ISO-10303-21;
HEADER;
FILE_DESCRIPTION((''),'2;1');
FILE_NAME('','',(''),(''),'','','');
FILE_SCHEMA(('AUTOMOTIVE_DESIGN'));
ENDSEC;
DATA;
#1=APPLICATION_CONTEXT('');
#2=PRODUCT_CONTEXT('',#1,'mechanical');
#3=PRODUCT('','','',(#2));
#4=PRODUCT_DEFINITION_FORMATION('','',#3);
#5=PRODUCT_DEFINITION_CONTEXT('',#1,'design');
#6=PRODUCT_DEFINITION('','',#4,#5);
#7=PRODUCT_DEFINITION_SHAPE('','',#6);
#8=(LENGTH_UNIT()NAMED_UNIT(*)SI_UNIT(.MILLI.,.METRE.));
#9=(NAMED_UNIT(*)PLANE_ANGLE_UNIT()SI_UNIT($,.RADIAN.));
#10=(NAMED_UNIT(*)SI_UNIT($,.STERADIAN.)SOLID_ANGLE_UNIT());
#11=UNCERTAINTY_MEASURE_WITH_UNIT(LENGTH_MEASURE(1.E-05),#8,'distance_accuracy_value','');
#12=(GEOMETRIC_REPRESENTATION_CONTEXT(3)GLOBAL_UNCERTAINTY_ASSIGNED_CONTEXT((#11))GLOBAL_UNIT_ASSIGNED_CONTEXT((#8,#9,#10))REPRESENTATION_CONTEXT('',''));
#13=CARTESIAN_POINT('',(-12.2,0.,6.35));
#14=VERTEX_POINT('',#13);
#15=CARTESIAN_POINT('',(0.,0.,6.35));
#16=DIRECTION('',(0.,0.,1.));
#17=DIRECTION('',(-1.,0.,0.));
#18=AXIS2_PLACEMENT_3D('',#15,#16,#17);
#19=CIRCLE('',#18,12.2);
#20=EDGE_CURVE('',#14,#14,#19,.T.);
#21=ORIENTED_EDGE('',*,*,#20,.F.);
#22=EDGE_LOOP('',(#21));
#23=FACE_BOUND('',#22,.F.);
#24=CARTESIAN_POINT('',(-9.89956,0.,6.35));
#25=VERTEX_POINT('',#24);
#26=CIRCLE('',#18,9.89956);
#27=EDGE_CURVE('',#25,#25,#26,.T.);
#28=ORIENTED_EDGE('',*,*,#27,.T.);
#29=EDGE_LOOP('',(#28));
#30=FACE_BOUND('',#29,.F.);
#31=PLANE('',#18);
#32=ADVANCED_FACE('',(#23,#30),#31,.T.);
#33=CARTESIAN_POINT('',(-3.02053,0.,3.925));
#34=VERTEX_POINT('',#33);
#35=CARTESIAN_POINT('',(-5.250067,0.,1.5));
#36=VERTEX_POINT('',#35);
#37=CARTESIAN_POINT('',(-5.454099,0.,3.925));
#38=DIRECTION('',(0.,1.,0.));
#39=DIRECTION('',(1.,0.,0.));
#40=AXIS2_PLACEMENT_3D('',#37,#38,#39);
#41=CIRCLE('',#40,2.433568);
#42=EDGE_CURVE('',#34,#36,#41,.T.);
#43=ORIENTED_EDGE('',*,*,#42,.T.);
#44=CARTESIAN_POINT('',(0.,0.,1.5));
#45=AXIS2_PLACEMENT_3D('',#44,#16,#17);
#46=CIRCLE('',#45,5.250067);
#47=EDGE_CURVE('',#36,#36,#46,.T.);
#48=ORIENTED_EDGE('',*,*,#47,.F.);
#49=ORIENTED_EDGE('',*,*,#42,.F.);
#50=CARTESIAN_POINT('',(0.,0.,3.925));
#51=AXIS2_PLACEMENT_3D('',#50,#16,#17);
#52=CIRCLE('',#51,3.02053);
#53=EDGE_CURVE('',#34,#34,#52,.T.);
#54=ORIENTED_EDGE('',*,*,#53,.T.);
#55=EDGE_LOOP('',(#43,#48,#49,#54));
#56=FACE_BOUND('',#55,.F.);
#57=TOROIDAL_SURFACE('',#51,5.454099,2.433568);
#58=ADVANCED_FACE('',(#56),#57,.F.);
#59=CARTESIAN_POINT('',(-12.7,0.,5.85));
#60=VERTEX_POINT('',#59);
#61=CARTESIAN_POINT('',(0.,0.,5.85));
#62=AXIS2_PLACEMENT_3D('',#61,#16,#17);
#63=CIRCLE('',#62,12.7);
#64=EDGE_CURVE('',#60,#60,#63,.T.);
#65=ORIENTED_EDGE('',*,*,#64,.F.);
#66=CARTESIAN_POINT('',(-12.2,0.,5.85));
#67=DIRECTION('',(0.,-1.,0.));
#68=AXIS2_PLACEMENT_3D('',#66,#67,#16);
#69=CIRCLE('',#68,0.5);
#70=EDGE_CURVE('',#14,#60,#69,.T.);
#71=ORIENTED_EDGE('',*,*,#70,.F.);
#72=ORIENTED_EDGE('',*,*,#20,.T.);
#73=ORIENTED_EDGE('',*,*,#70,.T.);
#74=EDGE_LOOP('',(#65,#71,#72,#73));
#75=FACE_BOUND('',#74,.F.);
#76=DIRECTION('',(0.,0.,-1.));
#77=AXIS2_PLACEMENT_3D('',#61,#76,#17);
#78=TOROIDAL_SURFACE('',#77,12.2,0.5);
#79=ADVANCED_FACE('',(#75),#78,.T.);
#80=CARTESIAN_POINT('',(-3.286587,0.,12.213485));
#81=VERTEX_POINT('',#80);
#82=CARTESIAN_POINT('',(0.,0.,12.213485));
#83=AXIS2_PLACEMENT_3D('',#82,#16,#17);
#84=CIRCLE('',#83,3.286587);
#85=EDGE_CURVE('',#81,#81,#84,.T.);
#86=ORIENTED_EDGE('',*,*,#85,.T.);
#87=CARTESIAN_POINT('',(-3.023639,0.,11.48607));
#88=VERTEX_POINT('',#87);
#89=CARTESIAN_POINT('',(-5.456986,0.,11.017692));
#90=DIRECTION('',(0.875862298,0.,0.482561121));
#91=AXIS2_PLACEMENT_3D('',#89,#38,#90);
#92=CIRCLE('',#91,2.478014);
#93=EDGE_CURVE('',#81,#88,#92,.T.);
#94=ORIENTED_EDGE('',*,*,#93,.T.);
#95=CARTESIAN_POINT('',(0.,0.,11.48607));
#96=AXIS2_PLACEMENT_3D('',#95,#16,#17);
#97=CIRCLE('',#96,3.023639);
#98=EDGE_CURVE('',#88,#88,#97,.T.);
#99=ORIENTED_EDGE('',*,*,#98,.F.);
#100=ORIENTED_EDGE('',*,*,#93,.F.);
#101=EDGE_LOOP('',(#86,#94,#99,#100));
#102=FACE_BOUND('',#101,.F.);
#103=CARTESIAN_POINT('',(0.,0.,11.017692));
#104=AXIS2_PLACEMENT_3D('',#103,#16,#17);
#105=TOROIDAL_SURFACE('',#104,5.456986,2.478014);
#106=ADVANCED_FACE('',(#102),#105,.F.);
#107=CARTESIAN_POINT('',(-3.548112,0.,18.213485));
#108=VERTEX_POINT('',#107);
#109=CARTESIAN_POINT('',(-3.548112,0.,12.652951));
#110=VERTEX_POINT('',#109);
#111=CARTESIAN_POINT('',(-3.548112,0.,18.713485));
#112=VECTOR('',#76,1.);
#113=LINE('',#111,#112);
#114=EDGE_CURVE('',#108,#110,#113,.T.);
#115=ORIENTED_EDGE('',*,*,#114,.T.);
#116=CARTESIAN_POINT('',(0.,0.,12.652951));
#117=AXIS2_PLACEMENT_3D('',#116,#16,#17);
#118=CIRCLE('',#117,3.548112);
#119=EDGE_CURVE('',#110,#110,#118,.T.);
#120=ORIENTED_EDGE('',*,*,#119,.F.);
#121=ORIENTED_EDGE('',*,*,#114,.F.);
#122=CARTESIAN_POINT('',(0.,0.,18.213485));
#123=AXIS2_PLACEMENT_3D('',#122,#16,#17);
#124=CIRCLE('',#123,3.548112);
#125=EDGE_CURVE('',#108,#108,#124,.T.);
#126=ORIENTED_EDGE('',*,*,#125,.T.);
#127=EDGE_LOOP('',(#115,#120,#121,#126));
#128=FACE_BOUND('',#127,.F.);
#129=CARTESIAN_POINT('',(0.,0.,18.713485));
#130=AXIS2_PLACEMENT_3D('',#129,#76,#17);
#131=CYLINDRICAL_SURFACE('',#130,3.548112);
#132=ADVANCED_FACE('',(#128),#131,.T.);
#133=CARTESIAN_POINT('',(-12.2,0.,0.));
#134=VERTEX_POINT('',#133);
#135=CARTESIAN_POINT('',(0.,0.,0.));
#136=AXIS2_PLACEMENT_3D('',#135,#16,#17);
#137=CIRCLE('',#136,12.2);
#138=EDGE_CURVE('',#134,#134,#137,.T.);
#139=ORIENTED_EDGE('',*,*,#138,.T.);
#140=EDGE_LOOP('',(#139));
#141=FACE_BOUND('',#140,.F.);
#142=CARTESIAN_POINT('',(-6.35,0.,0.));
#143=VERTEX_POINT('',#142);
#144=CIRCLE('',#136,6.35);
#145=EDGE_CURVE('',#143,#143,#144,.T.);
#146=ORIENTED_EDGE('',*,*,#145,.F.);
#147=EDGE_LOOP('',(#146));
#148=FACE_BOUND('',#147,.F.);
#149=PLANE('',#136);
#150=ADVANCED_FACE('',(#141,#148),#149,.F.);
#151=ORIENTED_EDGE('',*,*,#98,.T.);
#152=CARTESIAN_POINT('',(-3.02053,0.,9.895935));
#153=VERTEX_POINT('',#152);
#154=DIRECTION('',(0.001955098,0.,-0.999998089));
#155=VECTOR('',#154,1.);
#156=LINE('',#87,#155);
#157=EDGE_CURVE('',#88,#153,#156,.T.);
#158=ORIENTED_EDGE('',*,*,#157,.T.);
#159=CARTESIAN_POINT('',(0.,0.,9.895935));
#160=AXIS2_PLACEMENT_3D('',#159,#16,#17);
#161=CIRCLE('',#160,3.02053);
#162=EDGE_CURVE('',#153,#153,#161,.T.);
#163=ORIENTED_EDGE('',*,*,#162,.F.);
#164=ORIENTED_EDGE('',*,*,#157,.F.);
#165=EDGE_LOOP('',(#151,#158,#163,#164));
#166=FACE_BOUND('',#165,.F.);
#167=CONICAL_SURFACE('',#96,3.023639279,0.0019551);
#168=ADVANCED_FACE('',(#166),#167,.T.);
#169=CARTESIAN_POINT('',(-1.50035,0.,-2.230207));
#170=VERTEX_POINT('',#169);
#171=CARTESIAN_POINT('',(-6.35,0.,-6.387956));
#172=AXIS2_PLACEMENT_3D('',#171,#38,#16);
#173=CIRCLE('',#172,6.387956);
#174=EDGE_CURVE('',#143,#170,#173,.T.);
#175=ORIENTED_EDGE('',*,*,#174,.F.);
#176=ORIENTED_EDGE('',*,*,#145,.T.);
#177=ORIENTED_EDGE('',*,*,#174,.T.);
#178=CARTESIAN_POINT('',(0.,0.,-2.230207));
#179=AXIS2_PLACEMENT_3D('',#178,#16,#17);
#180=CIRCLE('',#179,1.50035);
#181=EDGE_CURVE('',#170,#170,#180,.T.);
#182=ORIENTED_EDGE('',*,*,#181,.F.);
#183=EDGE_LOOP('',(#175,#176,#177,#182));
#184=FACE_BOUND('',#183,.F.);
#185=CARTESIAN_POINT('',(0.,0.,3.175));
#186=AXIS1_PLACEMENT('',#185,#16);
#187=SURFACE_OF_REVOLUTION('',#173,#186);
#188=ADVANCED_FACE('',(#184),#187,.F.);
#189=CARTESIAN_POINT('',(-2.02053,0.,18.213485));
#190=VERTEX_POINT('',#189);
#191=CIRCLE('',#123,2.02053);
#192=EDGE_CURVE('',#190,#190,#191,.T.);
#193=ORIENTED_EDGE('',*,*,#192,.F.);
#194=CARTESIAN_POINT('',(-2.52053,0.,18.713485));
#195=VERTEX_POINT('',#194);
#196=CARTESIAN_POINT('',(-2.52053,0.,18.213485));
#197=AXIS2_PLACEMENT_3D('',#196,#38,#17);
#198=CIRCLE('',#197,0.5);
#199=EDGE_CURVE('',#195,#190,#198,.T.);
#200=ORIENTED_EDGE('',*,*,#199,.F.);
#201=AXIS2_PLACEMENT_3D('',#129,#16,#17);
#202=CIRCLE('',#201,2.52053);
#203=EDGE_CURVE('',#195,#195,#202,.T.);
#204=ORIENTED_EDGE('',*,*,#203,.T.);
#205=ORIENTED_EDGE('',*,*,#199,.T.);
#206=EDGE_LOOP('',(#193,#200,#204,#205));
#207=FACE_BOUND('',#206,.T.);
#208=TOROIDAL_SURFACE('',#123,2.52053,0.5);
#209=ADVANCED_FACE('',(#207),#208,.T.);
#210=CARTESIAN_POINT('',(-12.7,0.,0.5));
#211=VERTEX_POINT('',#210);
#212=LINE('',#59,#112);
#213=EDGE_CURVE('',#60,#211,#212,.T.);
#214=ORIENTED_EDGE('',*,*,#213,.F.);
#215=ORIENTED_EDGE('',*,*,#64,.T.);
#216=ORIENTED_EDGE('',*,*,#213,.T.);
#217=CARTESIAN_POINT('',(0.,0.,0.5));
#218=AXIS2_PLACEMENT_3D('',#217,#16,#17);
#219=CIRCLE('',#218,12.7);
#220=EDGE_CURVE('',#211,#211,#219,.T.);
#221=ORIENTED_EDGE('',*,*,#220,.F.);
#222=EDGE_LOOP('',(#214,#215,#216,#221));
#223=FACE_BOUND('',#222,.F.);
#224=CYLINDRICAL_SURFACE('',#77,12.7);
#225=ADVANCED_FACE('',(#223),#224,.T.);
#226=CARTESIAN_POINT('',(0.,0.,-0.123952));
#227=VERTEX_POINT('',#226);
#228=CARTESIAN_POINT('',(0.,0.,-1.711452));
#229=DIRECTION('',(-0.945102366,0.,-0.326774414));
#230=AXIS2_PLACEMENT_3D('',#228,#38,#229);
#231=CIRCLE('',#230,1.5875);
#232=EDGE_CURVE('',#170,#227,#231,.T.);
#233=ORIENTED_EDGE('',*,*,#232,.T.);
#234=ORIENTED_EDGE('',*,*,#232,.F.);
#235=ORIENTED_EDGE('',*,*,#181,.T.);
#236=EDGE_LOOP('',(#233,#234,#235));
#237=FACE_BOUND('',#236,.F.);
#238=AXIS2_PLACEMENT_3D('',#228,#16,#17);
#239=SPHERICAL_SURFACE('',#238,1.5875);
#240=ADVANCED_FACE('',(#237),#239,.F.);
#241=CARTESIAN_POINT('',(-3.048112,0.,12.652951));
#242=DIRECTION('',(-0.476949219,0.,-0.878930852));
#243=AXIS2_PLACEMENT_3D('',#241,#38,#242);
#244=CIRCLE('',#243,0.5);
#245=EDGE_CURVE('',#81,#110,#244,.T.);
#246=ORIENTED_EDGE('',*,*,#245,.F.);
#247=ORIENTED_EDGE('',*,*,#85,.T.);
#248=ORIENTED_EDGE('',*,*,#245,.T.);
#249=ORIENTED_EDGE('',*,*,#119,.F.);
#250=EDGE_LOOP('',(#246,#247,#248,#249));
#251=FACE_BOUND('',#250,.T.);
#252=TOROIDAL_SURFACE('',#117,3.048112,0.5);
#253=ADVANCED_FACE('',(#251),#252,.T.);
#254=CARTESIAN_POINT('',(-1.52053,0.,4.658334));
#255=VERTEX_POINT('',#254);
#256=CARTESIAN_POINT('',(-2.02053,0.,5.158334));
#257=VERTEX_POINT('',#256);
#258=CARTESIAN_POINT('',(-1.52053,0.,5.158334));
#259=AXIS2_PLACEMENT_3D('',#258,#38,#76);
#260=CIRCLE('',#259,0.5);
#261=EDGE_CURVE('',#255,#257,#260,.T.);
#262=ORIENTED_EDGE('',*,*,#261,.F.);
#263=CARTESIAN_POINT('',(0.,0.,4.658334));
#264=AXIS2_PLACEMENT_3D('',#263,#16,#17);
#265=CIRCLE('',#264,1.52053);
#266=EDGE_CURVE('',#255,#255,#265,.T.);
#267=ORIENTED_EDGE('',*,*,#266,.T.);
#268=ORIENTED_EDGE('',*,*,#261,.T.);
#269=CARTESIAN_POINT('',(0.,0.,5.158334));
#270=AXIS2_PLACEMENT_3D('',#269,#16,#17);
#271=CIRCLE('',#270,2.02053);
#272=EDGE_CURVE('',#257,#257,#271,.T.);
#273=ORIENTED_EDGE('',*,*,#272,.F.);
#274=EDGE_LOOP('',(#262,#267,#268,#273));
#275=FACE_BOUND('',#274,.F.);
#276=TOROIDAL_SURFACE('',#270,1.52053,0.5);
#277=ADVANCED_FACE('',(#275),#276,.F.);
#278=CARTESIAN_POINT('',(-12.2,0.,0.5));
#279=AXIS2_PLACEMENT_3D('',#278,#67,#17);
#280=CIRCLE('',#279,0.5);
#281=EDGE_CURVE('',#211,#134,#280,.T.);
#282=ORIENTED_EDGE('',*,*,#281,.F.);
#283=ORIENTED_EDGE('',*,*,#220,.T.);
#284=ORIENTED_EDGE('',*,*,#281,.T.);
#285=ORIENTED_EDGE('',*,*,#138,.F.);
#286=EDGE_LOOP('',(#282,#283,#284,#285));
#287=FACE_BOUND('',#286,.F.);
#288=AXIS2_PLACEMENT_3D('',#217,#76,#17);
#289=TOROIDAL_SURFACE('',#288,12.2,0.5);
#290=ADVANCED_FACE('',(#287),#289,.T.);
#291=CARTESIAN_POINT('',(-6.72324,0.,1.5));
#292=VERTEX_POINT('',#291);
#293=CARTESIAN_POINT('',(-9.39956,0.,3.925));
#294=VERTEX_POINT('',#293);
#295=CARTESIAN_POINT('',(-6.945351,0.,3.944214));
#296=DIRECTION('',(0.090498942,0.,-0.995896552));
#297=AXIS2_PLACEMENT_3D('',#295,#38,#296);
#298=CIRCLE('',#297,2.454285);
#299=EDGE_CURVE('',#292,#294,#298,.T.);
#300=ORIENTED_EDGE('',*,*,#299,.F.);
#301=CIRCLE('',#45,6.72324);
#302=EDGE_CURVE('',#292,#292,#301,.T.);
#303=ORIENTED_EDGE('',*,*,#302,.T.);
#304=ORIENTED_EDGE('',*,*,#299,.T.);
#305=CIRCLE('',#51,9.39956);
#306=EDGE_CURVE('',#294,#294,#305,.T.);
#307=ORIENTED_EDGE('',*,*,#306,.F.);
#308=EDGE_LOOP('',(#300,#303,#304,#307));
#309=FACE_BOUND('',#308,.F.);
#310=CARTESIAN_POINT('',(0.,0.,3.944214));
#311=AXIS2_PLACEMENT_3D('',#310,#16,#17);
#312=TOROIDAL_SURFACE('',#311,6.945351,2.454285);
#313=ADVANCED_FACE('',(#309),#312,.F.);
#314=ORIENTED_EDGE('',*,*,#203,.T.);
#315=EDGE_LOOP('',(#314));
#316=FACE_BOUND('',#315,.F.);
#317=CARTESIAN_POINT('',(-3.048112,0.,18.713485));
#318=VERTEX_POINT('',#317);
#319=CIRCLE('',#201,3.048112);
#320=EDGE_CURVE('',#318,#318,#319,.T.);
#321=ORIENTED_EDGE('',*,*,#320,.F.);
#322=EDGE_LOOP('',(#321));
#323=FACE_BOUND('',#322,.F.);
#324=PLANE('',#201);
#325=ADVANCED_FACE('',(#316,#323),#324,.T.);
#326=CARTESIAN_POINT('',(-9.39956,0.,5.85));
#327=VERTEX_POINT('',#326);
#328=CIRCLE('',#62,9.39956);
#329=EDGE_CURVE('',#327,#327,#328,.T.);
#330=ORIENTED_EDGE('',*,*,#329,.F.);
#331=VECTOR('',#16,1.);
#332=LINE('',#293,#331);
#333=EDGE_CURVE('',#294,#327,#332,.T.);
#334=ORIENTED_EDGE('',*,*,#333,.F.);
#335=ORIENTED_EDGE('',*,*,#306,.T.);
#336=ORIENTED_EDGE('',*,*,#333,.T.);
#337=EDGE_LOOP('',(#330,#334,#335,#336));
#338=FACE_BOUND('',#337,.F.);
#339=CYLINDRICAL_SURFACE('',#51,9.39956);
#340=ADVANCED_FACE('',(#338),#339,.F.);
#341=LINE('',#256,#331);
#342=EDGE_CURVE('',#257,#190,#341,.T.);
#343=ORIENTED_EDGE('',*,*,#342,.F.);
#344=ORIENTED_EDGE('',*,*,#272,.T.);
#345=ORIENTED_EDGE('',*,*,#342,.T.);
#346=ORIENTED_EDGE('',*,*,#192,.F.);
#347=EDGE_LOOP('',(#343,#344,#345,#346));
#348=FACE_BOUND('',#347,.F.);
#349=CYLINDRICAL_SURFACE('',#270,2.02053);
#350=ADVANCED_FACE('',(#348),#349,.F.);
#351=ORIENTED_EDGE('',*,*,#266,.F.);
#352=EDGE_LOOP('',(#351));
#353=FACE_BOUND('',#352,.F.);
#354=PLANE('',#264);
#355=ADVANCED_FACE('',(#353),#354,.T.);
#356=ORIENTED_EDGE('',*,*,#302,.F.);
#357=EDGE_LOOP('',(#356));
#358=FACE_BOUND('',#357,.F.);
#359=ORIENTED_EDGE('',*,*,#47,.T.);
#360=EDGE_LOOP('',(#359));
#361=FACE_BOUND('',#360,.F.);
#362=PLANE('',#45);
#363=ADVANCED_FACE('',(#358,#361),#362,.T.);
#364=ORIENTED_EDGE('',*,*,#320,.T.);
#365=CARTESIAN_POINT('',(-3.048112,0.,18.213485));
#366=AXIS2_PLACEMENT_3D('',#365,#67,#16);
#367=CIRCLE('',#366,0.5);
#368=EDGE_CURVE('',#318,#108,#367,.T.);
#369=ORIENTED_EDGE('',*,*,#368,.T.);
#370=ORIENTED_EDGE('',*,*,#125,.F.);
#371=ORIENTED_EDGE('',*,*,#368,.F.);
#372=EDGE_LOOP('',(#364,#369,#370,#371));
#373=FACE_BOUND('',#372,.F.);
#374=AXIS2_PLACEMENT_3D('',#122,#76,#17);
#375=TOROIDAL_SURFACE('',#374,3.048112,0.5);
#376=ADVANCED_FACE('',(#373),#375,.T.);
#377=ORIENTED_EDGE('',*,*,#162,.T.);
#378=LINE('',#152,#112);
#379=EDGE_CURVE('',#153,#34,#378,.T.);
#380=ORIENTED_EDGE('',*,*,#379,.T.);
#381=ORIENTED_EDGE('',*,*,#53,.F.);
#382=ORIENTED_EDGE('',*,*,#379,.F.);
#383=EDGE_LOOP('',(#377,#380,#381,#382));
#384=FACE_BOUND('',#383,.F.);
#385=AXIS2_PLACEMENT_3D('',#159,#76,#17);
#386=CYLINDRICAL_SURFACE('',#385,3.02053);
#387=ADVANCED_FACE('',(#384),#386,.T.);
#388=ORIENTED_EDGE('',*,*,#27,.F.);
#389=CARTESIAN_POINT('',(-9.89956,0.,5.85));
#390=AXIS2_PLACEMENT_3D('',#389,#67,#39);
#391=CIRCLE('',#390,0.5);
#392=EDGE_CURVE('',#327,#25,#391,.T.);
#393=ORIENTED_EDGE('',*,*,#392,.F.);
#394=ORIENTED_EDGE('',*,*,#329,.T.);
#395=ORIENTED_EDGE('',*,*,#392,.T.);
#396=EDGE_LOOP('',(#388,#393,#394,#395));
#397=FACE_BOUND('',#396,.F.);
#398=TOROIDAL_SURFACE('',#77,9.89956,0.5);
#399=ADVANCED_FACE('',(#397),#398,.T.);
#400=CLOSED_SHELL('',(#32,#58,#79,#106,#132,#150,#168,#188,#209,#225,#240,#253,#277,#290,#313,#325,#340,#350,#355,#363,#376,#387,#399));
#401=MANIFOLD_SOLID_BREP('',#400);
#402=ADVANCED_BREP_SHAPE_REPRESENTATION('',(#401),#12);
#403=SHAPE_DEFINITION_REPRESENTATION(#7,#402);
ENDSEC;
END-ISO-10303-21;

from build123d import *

# Parameters (mm, degrees)
F3_R = 0.5


# Not quite as in the source:
# - a fillet or chamfer that OpenCascade refuses, or shapes differently, is made with other operations: its cross-section is extruded or revolved along the edge and cut away or added
# - a feature names something its author has since deleted; it is built from what else it names


with BuildPart() as f1:
    # F0 (on Front) → F1 (revolve)
    with BuildSketch(Plane.XZ):
        with BuildLine():
            Line((-12.2, 0), (-6.35, 0))
            ThreePointArc((-6.35, 0), (-3.6810616685, -0.5842717783), (-1.5003500059, -2.2302067626))
            ThreePointArc((-1.5003500059, -2.2302067626), (-1.292996294, -0.7904112116), (0, -0.1239523798))
            Line((0, -0.1239523798), (0, 0))
            Line((0, 0), (0, 4.6583339572))
            Line((0, 4.6583339572), (-1.5205304027, 4.6583339572))
            ThreePointArc((-1.5205304027, 4.6583339572), (-1.8740837933, 4.8047805666), (-2.0205304027, 5.1583339572))
            Line((-2.0205304027, 5.1583339572), (-2.0205304027, 18.7134853154))
            Line((-2.0205304027, 18.7134853154), (-3.0250614509, 18.7134853154))
            Line((-3.0250614509, 18.7134853154), (-3.5481122322, 18.7134853154))
            Line((-3.5481122322, 18.7134853154), (-3.5481122322, 12.2134853154))
            Line((-3.5481122322, 12.2134853154), (-3.2865868416, 12.2134853154))
            ThreePointArc((-3.2865868416, 12.2134853154), (-3.1265563478, 11.8601003085), (-3.0236392793, 11.4860698297))
            Line((-3.0236392793, 11.4860698297), (-3.0205304027, 9.8959347233))
            Line((-3.0205304027, 9.8959347233), (-3.0205304027, 3.925))
            ThreePointArc((-3.0205304027, 3.925), (-3.6626216951, 2.2779224085), (-5.2500669844, 1.5))
            Line((-5.2500669844, 1.5), (-6.7232404836, 1.5))
            ThreePointArc((-6.7232404836, 1.5), (-8.5932958155, 2.1254805036), (-9.3995602801, 3.925))
            Line((-9.3995602801, 3.925), (-9.3995602801, 5.85))
            ThreePointArc((-9.3995602801, 5.85), (-9.5460068896, 6.2035533906), (-9.8995602801, 6.35))
            Line((-9.8995602801, 6.35), (-12.2, 6.35))
            ThreePointArc((-12.2, 6.35), (-12.5535533906, 6.2035533906), (-12.7, 5.85))
            Line((-12.7, 5.85), (-12.7, 0.5))
            ThreePointArc((-12.7, 0.5), (-12.5535533906, 0.1464466094), (-12.2, 0))
        make_face()
    revolve(axis=Axis((0, 0, 3.175), (0, 0, 1)))

    # F2: fillet of radius 0.5 on 2 edges, made by hand

    # F2_s1 → F2_t2 (revolve, cut)
    with BuildSketch(Plane.XZ):
        with BuildLine():
            ThreePointArc((-3.0481122322, 18.7134853154), (-3.4016656228, 18.567038706), (-3.5481122322, 18.2134853154))
            Line((-3.5481122322, 18.2134853154), (-3.5581122322, 18.2134853154))
            Line((-3.5581122322, 18.2134853154), (-3.5581122322, 18.7234853154))
            Line((-3.5581122322, 18.7234853154), (-3.0481122322, 18.7234853154))
            Line((-3.0481122322, 18.7234853154), (-3.0481122322, 18.7134853154))
        make_face()
    revolve(axis=Axis((0, 0, 18.7134853154), (0, 0, 1)), mode=Mode.SUBTRACT)

    # F2_s3 → F2_t4 (revolve, cut)
    with BuildSketch(Plane.XZ):
        with BuildLine():
            ThreePointArc((-3.2865868416, 12.2134853154), (-3.4777849592, 12.3972529753), (-3.5481122322, 12.6529507415))
            Line((-3.5481122322, 12.6529507415), (-3.5581122322, 12.6529507415))
            Line((-3.5581122322, 12.6529507415), (-3.5581122322, 12.2134853154))
            Line((-3.5581122322, 12.2134853154), (-3.5481122322, 12.2034853154))
            ThreePointArc((-3.5481122322, 12.2034853154), (-3.4173495369, 12.2034853154), (-3.2913563338, 12.2046960069))
            Line((-3.2913563338, 12.2046960069), (-3.2865868416, 12.2134853154))
        make_face()
    revolve(axis=Axis((0, 0, 12.2134853154), (0, 0, 1)), mode=Mode.SUBTRACT)

    # F3
    f3_edges = [f1.edges().sort_by_distance(p)[0] for p in [
        (2.02053, 0, 18.713485),
    ]]
    fillet(f3_edges, radius=F3_R)


solid = f1.part
